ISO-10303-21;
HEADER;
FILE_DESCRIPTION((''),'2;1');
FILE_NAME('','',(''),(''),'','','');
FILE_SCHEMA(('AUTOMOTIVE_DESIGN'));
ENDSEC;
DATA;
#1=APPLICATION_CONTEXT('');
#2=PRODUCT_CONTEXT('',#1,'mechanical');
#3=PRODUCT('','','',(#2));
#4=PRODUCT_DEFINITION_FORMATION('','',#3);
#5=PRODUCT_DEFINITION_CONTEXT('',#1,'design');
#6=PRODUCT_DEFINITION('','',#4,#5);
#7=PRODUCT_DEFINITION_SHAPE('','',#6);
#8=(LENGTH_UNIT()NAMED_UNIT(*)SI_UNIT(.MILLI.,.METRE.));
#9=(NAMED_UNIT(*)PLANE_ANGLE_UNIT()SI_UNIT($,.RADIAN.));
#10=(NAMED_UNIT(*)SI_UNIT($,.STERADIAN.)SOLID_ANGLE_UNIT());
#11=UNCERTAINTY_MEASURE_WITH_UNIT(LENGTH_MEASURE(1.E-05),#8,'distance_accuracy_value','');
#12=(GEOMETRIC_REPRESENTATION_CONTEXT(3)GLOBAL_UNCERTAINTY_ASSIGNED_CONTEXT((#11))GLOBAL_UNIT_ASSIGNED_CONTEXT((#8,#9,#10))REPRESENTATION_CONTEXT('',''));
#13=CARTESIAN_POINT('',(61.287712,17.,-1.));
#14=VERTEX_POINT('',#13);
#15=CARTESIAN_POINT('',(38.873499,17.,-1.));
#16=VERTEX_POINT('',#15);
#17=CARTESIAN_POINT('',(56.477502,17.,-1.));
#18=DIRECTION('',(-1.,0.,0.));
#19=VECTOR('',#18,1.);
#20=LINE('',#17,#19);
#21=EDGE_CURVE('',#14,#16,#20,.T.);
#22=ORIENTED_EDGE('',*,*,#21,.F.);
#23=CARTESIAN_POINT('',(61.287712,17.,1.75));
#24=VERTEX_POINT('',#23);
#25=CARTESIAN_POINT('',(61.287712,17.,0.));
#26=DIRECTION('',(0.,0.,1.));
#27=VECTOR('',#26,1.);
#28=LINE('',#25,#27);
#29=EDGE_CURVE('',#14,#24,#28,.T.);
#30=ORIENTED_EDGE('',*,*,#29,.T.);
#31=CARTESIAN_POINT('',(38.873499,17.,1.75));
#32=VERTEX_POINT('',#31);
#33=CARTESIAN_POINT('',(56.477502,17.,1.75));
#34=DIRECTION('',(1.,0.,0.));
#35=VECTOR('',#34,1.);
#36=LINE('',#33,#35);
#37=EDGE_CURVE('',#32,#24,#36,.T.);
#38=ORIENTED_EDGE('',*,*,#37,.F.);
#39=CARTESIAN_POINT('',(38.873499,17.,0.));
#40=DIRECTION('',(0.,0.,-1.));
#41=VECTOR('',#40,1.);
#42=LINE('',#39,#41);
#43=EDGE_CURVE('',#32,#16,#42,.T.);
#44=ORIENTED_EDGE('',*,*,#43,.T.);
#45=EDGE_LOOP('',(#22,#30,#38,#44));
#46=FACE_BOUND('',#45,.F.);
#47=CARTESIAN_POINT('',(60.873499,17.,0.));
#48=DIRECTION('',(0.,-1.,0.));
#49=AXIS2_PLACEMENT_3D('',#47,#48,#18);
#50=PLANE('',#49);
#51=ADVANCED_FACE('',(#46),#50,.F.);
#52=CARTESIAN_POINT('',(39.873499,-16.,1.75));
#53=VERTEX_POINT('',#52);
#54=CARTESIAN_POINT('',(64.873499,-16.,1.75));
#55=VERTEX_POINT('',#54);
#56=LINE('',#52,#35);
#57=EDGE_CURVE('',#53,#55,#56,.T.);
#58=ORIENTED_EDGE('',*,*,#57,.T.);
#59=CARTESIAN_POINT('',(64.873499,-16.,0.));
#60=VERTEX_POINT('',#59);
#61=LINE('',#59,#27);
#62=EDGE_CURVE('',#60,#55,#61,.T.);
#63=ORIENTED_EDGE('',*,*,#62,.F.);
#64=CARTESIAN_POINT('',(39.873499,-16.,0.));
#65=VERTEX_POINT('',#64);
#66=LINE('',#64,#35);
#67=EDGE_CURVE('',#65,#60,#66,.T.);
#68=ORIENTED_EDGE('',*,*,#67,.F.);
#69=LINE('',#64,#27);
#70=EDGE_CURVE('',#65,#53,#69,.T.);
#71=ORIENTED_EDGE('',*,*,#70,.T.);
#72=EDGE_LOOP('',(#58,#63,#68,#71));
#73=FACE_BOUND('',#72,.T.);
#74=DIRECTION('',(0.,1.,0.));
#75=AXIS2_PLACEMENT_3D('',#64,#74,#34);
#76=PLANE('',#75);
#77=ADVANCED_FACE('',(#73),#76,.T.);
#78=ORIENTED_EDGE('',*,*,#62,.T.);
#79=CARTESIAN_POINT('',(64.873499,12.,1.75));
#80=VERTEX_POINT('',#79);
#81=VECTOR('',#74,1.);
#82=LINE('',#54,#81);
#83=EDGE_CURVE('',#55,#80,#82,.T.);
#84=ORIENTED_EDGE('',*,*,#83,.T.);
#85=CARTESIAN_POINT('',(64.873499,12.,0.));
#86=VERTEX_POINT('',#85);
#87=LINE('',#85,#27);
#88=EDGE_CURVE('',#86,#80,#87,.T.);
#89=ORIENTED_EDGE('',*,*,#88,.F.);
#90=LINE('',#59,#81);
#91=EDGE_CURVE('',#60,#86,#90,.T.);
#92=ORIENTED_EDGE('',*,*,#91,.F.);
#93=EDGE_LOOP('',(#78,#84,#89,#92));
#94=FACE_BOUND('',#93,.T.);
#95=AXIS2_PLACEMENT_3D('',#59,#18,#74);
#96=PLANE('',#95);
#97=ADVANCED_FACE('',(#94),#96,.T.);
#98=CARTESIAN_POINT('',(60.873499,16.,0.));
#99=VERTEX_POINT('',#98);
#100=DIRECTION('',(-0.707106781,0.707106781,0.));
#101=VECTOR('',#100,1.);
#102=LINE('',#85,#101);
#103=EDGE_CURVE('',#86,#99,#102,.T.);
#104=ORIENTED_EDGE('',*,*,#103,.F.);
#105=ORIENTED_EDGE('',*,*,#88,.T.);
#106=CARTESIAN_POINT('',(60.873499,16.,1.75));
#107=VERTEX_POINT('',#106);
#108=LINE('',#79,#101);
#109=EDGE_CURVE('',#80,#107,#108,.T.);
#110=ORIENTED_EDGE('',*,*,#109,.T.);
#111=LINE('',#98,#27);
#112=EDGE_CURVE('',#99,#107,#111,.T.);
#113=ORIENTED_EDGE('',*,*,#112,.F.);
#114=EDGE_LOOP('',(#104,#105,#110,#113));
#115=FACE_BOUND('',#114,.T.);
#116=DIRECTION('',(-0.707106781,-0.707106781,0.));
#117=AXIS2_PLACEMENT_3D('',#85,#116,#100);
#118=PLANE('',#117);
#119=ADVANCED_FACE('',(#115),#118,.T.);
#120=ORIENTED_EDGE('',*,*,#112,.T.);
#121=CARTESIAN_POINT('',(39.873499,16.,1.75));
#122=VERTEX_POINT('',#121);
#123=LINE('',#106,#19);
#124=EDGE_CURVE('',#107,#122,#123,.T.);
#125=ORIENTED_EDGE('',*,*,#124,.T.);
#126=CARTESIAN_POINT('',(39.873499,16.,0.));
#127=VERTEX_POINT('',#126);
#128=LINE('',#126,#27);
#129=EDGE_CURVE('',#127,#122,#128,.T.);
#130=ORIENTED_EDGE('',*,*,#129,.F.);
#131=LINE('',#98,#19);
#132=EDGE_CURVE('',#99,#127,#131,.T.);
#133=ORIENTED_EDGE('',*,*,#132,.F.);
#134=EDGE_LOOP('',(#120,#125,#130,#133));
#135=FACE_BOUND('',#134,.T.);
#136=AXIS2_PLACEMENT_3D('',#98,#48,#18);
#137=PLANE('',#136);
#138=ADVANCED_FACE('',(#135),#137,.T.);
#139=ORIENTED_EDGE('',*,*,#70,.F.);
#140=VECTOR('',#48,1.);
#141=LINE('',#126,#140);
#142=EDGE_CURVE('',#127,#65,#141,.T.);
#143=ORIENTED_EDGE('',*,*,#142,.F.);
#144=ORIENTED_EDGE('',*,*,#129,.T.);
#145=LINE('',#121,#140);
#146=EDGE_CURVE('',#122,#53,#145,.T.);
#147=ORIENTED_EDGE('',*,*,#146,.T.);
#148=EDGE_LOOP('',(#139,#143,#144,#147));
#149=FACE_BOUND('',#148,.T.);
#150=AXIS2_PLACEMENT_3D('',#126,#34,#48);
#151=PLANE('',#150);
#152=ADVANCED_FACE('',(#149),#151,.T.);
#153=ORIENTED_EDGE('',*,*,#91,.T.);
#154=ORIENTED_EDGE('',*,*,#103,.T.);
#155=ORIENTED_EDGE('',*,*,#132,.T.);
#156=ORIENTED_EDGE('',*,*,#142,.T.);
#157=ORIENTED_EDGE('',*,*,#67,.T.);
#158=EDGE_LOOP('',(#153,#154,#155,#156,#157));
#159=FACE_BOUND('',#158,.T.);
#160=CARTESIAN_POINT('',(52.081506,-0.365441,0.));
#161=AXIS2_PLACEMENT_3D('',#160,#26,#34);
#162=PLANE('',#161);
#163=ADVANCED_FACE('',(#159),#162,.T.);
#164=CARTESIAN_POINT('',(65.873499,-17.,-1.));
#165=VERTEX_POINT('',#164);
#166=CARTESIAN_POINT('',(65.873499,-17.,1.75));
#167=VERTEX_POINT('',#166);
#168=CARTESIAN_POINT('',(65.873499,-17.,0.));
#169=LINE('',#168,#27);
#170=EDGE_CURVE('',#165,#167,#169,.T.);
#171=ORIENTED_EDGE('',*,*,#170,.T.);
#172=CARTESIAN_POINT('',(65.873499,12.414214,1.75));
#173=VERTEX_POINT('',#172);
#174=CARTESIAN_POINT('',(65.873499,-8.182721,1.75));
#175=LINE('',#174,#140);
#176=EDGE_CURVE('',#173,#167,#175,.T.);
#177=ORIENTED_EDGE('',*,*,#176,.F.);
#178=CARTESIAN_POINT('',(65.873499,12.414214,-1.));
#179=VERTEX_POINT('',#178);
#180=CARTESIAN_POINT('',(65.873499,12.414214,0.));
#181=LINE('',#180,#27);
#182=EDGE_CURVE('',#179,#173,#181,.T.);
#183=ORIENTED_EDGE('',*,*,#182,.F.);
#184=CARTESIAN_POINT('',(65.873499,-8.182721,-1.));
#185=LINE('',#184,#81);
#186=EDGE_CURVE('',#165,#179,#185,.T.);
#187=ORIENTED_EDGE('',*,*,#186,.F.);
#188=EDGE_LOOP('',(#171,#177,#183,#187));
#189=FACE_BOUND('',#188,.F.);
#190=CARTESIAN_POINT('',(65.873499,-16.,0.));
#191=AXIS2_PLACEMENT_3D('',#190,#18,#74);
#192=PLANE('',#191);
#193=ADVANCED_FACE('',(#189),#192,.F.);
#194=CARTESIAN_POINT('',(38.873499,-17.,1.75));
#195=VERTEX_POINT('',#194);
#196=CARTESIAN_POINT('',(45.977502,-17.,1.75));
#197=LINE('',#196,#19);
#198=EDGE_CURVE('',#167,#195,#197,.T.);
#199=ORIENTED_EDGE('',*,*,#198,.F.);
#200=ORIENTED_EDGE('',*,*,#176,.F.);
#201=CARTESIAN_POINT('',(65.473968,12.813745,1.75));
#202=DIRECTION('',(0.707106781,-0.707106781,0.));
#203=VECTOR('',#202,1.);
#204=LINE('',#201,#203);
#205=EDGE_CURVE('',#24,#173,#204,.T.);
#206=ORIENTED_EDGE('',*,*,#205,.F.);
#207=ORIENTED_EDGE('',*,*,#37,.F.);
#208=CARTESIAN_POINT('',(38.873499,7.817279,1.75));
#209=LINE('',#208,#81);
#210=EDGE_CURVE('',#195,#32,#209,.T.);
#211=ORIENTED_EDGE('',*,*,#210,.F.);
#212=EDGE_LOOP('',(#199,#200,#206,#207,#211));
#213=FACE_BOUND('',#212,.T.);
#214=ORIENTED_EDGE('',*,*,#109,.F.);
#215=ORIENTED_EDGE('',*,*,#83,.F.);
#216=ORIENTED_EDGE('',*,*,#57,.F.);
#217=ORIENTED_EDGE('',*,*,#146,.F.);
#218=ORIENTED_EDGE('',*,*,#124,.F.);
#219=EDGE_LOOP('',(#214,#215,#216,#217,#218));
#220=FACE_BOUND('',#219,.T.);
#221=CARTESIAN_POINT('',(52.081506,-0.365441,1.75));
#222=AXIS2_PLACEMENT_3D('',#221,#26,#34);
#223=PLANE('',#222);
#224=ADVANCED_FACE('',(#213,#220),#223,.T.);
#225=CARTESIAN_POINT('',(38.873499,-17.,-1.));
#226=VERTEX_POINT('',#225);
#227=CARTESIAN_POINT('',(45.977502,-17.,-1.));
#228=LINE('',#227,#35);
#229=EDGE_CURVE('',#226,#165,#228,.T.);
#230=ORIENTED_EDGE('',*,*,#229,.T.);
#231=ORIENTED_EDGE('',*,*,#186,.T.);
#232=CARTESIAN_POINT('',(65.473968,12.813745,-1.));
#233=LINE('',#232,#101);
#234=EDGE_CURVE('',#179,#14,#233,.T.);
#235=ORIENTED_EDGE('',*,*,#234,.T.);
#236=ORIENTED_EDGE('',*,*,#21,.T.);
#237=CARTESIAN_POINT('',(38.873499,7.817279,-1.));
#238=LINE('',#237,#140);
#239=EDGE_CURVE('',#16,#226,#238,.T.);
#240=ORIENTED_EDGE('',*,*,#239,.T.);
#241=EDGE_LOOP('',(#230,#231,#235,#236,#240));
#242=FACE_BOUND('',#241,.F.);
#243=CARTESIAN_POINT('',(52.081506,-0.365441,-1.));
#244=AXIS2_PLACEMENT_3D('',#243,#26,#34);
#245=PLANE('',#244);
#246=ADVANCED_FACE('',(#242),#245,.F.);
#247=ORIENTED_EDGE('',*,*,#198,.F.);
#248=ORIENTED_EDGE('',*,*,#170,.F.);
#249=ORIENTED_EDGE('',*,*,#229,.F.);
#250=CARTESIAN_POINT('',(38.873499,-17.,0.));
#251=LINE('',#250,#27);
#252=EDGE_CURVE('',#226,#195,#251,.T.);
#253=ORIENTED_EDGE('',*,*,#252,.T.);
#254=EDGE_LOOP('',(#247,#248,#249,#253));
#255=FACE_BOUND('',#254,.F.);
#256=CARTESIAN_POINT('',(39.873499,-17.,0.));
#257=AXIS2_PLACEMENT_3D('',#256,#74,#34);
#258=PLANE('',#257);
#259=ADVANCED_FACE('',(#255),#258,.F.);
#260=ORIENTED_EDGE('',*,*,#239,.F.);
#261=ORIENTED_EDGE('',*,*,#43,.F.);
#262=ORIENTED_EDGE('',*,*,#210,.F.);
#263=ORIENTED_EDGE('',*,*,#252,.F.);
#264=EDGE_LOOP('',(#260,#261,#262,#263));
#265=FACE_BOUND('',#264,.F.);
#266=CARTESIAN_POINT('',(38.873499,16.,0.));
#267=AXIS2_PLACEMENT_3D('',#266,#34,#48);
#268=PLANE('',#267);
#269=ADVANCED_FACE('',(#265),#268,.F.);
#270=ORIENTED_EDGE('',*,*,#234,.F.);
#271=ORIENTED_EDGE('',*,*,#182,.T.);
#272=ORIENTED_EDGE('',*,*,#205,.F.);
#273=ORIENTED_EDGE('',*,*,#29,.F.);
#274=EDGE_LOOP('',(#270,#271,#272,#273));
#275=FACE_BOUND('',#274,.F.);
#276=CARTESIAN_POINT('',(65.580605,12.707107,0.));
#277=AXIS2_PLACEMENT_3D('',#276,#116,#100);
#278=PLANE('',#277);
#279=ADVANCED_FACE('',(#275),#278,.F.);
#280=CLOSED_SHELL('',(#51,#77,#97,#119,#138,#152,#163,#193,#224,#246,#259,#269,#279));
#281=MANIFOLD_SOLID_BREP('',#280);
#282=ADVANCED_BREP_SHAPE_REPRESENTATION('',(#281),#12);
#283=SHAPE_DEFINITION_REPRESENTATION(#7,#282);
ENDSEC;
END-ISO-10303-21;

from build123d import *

# Parameters (mm, degrees)
F1_DEPTH = 1.75
F2_T     = 1


with BuildPart() as f1:
    # F0 (on Top) → F1 (new body)
    with BuildSketch(Plane.XY):
        Polygon((39.8734986782, 16), (39.8734986782, -16), (64.8734986782, -16), (64.8734986782, 12), (60.8734986782, 16), align=None)
    extrude(amount=F1_DEPTH)

    # F2
    f2_openings = [f1.faces().sort_by_distance(p)[0] for p in [
        (52.260704, -0.148148, 1.75),
    ]]
    offset(amount=F2_T, openings=f2_openings, kind=Kind.INTERSECTION)


solid = f1.part
